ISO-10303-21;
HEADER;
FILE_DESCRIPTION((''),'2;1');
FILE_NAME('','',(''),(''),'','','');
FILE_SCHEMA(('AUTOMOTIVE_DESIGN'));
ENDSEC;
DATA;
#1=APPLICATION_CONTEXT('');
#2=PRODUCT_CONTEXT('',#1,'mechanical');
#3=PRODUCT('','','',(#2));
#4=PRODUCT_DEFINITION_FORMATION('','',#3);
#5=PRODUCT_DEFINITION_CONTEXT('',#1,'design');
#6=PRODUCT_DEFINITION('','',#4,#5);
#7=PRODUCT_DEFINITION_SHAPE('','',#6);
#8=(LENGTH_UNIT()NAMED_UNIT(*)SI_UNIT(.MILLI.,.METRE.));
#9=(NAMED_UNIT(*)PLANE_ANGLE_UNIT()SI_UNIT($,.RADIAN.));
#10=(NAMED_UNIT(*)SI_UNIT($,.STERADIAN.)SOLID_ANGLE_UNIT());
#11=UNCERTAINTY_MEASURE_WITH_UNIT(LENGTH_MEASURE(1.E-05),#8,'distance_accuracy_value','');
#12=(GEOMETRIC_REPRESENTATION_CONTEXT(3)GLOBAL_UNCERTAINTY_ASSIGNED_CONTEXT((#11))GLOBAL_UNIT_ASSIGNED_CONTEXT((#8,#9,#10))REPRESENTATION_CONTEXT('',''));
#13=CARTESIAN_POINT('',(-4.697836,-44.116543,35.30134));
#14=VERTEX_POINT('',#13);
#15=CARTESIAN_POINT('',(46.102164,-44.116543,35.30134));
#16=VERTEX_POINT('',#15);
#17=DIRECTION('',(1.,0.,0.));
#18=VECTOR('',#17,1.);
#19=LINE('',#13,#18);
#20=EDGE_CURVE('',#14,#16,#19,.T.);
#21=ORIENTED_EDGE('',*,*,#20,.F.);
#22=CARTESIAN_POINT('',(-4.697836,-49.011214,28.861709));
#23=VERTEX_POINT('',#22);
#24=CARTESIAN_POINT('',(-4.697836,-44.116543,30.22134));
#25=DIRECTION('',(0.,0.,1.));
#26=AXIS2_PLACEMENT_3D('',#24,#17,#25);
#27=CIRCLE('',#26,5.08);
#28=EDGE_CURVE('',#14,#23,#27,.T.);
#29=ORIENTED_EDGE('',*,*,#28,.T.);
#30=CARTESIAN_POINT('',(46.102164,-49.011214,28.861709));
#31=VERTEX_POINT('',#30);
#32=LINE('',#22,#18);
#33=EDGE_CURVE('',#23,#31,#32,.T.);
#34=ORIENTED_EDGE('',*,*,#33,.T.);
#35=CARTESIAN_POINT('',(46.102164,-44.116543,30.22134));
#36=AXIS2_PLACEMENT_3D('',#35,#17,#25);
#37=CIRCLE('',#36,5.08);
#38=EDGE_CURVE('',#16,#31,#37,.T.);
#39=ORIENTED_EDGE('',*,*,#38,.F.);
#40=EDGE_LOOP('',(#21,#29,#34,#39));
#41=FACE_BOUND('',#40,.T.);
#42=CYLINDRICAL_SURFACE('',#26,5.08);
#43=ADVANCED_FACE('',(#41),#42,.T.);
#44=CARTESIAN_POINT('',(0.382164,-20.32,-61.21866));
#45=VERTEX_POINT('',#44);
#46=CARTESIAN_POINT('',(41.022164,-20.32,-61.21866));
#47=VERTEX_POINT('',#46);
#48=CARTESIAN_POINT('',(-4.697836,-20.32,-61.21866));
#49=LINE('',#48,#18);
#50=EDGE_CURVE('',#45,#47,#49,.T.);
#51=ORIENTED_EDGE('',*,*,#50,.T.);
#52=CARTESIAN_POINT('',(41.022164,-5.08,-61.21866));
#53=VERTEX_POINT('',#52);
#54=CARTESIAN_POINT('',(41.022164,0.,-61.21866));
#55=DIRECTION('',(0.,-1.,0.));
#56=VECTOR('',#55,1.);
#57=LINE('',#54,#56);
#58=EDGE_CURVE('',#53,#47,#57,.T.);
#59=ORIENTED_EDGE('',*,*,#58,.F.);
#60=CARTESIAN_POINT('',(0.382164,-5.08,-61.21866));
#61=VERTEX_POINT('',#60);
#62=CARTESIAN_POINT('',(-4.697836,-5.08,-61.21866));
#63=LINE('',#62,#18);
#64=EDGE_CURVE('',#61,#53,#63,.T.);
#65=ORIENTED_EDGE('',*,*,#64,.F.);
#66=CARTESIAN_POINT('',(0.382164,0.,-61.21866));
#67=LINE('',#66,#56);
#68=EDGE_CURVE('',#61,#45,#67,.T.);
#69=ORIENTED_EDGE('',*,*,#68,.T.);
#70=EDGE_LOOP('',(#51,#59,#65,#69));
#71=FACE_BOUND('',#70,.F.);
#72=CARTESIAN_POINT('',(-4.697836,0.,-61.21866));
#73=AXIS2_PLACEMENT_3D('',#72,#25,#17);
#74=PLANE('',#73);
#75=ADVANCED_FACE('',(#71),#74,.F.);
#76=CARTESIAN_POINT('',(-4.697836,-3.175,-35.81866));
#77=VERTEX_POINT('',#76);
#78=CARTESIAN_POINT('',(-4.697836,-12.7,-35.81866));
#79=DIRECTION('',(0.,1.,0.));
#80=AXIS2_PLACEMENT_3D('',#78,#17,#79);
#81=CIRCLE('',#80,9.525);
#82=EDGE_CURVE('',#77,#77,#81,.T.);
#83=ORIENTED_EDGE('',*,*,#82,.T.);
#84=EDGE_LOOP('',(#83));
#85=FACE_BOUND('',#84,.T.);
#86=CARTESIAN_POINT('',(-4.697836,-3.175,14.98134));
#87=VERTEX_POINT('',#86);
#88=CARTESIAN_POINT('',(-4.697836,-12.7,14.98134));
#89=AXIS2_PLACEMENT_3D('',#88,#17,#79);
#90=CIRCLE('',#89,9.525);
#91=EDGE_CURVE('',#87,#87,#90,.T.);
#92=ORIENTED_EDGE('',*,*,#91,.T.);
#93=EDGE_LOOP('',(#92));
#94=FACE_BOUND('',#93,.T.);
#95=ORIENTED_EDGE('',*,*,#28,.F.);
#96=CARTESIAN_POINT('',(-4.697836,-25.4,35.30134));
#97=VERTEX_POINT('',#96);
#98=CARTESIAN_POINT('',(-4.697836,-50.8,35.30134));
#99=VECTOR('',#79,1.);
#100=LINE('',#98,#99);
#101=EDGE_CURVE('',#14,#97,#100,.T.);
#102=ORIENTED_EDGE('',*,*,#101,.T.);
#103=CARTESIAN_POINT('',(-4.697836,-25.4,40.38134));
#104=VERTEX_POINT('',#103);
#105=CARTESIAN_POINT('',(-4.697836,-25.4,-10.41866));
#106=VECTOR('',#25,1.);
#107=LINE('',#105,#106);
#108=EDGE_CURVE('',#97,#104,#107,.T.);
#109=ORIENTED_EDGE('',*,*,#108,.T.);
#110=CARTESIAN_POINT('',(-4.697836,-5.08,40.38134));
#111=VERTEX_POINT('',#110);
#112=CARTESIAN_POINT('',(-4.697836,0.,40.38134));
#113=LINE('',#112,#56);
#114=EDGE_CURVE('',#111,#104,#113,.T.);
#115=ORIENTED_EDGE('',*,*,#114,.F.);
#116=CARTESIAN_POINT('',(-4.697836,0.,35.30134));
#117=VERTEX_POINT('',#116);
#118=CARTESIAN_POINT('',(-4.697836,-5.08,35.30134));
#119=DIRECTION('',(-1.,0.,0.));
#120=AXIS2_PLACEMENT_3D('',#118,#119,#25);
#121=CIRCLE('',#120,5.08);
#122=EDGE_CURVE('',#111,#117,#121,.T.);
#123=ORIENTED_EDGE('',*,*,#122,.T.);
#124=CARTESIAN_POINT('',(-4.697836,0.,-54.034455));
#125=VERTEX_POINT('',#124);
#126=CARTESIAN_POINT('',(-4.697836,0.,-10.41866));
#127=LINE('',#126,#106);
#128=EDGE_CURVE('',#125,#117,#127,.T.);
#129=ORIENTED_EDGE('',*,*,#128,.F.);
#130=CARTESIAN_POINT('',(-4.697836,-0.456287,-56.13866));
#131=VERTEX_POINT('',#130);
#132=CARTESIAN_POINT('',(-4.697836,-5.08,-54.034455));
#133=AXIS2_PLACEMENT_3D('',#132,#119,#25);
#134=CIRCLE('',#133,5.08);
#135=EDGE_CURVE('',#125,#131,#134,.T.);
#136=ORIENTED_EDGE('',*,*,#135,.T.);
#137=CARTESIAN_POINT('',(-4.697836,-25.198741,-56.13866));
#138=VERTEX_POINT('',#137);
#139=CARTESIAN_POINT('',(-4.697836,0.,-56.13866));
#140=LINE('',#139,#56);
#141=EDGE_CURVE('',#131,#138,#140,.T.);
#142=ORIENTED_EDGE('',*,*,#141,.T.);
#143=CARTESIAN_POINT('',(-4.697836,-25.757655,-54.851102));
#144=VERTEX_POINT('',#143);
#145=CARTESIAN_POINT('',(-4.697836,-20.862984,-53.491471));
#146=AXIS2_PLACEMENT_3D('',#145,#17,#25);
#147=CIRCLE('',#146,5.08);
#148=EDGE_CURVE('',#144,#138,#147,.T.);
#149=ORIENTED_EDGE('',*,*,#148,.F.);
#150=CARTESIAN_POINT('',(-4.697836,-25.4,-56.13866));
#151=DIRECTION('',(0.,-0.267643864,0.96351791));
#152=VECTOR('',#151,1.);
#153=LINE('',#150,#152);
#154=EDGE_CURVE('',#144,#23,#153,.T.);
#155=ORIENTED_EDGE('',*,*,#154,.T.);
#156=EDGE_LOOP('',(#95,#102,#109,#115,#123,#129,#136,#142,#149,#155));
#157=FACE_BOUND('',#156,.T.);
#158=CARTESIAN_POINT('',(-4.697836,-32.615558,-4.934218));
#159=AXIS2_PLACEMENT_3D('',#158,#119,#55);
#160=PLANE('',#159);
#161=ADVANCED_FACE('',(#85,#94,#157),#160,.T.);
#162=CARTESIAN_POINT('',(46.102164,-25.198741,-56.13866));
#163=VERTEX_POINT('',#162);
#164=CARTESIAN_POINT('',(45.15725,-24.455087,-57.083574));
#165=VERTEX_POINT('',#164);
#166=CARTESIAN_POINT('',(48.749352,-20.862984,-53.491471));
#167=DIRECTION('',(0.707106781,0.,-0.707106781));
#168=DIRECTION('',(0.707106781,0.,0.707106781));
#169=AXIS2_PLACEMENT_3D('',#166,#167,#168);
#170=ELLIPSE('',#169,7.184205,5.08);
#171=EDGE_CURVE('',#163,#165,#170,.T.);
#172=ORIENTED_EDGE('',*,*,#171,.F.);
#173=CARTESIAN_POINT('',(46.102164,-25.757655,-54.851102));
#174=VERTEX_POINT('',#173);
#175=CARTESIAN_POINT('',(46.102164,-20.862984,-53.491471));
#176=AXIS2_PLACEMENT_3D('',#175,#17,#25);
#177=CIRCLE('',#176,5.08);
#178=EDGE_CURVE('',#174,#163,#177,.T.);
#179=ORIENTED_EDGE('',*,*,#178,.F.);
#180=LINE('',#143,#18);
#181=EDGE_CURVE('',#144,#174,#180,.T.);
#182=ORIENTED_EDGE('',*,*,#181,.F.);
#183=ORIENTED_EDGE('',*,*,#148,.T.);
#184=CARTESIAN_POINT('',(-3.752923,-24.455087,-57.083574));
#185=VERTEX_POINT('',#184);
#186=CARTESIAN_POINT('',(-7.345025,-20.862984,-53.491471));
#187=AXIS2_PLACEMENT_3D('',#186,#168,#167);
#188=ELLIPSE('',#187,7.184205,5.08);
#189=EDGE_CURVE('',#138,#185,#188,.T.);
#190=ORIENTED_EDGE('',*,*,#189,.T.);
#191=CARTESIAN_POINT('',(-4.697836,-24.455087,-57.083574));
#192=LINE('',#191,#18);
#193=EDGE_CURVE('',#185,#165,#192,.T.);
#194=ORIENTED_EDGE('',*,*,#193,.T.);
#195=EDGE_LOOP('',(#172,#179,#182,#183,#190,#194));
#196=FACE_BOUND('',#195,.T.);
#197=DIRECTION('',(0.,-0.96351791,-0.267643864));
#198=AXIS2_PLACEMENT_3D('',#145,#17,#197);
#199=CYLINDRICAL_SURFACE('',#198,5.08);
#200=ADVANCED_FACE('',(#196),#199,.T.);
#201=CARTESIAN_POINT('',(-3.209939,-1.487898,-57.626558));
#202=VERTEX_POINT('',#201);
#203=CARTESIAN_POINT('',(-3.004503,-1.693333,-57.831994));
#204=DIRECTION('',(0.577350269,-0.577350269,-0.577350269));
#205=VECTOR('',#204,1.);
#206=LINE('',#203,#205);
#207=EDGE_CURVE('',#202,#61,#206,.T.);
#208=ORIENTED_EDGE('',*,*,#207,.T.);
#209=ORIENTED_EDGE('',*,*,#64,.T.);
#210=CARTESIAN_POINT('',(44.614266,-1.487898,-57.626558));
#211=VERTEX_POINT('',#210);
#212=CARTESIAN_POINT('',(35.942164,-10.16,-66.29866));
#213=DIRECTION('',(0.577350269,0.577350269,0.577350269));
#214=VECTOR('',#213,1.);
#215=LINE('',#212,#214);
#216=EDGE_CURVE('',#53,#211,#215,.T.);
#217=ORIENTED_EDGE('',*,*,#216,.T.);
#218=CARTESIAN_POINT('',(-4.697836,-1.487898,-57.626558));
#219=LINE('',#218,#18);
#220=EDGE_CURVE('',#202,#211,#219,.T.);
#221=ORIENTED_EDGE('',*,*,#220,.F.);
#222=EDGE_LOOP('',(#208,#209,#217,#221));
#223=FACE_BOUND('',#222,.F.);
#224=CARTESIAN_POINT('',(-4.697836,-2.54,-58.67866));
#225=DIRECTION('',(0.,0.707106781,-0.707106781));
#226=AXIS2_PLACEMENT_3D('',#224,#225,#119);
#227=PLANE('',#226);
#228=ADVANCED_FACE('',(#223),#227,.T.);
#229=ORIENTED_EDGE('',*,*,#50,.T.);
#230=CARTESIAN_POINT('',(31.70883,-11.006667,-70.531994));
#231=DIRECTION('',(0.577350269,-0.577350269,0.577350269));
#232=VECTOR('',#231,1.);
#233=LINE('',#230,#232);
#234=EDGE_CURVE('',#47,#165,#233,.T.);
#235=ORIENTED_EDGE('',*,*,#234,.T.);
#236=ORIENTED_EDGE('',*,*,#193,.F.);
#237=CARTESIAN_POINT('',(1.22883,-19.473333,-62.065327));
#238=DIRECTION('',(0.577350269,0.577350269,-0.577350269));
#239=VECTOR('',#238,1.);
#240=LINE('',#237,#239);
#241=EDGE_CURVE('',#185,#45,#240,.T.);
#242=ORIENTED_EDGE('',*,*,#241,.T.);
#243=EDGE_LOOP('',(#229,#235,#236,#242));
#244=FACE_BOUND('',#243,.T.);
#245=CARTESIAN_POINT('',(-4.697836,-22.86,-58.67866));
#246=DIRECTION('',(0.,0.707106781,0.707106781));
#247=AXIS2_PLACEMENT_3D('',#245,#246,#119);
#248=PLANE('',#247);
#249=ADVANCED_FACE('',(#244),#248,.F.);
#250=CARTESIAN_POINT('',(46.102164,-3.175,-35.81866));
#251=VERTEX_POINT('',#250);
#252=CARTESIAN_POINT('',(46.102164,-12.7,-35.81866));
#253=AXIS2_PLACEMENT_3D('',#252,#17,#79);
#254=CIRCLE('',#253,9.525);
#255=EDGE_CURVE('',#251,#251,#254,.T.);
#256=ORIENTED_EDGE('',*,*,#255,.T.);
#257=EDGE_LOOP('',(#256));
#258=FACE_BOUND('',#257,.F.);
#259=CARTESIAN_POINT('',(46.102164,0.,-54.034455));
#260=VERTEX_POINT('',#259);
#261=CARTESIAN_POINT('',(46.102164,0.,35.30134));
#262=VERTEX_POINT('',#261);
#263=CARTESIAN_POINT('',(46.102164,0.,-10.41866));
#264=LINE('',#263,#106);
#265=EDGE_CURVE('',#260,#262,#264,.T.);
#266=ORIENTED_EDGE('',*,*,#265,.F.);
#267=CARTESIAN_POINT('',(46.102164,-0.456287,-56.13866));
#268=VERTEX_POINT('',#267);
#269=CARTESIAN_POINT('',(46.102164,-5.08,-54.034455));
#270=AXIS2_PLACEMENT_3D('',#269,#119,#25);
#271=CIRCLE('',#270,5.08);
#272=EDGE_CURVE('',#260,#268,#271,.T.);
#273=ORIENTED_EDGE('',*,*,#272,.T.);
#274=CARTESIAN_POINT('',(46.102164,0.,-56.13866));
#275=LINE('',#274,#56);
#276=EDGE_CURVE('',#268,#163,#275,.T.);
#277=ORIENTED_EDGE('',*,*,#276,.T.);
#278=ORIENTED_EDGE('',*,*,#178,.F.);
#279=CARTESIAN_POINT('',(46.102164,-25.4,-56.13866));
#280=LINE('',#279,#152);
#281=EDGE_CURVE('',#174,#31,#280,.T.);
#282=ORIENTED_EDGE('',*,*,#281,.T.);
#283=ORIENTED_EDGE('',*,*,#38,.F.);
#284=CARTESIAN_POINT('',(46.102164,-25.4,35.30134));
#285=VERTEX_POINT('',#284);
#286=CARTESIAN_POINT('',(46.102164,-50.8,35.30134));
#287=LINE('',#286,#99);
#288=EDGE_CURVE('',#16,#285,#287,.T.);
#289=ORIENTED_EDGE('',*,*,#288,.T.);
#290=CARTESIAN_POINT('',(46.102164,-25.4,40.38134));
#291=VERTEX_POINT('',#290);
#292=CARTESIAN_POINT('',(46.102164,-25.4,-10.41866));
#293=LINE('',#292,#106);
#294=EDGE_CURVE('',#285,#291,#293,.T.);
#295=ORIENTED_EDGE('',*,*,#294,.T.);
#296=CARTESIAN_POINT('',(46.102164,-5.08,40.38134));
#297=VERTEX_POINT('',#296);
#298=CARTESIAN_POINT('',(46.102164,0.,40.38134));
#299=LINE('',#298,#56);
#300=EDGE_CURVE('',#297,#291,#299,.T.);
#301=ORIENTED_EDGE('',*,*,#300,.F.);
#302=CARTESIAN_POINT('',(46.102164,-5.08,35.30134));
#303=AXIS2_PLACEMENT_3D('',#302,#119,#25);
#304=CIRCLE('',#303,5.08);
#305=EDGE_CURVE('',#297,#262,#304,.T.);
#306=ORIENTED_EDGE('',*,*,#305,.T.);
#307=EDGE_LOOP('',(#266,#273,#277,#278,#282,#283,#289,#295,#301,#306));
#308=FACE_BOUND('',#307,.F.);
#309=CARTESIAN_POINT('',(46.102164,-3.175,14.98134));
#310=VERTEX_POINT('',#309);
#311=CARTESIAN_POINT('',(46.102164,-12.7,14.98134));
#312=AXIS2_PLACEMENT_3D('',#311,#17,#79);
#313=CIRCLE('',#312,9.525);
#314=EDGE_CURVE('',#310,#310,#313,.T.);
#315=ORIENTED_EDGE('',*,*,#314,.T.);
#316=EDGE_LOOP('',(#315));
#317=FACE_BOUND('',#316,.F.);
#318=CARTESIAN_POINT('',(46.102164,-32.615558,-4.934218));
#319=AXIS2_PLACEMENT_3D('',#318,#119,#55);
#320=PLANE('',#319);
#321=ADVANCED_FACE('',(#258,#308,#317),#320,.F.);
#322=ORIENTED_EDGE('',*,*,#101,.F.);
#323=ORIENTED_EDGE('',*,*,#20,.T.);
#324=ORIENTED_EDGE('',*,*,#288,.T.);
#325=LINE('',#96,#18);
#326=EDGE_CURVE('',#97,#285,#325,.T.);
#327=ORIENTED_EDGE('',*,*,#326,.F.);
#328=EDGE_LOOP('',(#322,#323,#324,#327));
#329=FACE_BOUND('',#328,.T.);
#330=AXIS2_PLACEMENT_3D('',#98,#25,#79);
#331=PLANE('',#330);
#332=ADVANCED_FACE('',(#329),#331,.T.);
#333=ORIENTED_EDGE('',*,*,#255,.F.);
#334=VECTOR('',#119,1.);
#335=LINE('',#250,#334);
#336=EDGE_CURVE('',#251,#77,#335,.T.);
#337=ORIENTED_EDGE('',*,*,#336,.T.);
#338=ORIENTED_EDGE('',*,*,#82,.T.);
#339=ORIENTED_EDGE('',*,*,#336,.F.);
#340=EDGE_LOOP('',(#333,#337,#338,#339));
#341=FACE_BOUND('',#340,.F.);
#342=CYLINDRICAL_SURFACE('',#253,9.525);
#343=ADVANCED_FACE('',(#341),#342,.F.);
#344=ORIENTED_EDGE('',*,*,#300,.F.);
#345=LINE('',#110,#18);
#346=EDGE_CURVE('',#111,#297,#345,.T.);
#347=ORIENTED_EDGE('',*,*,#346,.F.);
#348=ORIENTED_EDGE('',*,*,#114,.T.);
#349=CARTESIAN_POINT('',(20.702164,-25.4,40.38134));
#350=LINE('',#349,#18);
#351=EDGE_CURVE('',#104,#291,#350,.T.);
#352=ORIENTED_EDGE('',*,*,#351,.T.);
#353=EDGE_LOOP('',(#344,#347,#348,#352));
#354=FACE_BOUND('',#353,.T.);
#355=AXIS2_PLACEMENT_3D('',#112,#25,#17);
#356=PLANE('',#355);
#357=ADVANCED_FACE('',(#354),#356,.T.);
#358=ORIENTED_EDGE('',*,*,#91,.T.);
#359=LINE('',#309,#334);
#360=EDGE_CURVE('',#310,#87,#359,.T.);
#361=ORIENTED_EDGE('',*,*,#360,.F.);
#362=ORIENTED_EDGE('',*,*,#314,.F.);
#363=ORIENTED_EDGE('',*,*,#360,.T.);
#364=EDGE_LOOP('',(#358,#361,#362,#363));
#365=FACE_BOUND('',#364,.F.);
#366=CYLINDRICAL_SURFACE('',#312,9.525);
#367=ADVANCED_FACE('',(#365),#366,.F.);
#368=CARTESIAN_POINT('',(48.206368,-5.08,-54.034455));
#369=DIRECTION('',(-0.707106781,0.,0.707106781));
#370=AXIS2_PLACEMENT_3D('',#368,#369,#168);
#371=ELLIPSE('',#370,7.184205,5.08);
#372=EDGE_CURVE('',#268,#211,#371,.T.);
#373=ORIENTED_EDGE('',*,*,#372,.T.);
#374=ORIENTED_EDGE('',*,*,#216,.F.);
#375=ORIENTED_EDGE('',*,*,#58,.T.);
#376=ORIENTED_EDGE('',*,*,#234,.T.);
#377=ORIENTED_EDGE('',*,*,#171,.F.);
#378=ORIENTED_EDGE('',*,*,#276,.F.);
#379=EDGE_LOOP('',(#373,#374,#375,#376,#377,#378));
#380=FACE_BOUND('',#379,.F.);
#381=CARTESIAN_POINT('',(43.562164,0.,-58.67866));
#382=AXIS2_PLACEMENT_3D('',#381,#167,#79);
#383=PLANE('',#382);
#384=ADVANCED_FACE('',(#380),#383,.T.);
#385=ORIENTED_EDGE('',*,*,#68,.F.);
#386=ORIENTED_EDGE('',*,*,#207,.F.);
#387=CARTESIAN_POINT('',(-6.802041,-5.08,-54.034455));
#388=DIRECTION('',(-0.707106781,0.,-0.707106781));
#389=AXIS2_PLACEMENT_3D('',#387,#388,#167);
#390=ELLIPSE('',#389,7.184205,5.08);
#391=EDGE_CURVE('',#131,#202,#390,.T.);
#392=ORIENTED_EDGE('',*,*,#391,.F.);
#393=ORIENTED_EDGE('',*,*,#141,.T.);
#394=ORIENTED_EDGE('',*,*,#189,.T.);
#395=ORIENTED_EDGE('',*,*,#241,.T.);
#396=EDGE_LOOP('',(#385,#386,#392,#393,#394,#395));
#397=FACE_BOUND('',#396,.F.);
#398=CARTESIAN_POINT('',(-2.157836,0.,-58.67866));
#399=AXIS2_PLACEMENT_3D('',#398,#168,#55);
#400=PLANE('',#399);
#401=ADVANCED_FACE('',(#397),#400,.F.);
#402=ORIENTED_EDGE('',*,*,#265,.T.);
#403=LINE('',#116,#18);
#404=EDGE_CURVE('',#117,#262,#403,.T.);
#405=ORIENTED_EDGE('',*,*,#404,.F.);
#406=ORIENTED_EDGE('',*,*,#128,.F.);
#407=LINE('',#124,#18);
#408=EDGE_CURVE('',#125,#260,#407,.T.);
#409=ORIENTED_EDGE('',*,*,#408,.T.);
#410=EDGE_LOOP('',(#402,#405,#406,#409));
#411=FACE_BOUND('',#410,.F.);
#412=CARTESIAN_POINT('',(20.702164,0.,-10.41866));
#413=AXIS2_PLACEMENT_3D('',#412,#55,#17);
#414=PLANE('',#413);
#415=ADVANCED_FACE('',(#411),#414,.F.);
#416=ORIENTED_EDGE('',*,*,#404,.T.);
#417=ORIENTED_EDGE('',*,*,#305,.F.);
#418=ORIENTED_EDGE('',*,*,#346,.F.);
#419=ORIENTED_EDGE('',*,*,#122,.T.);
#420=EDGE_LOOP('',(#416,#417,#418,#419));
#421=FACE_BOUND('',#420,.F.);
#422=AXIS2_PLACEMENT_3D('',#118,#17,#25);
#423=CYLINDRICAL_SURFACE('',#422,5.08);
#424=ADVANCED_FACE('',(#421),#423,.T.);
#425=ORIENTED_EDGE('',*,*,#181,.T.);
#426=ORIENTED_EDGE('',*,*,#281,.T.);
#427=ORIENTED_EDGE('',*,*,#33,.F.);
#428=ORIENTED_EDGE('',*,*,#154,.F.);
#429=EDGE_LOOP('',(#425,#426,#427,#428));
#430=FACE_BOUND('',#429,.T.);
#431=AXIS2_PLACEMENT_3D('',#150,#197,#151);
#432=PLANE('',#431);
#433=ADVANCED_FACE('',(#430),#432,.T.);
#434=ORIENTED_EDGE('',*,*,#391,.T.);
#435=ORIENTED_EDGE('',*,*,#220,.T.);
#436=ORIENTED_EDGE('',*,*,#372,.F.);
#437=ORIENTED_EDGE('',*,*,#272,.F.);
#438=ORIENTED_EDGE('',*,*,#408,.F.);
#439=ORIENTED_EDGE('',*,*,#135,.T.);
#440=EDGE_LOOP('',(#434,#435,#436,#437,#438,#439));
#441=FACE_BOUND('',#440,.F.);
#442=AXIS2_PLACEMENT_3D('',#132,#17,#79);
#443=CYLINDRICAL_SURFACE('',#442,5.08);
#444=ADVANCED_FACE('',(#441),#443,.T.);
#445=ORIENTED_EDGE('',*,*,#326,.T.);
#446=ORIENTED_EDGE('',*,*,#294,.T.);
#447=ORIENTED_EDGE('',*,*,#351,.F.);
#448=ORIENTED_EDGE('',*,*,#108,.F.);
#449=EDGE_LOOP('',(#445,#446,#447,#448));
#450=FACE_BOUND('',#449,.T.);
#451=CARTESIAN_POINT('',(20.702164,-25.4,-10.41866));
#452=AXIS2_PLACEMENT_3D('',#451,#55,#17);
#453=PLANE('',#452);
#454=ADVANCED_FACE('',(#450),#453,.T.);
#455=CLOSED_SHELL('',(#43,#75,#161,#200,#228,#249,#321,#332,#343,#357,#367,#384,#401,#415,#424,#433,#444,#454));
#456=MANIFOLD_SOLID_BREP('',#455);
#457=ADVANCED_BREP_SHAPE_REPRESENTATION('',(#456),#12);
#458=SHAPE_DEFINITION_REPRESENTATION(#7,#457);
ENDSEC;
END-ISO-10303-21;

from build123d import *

# Parameters (mm, degrees)
F0_W     = 50.8
F0_H     = 101.6
F1_DEPTH = 25.4
F2_R     = 9.525
F3_DEPTH = 50.8
F4_SIZE  = 5.08
F7_DEPTH = 50.8
F8_R     = 5.08


# Not quite as in the source:
# - a feature of the source that left no trace in its solid (it failed there, or was rolled back) is left out


with BuildPart() as f1:
    # F0 (on Front) → F1 (new body)
    with BuildSketch(Plane.XZ):
        with Locations((20.7021635301, -10.4186603248)):
            Rectangle(F0_W, F0_H)
    extrude(amount=F1_DEPTH)

    # F2 (on face) → F3 (cut)
    with BuildSketch(Plane.YZ.offset(46.1021635301)):
        with Locations((-12.7, 14.9813396752)):
            Circle(F2_R)
        with Locations((-12.7, -35.8186603248)):
            Circle(F2_R)
    extrude(amount=-F3_DEPTH, mode=Mode.SUBTRACT)

    # F4
    f4_edges = [f1.edges().sort_by_distance(p)[0] for p in [
        (-4.697836, -12.7, -61.21866),
        (46.102164, -12.7, -61.21866),
        (20.702164, 0, -61.21866),
        (20.702164, -25.4, -61.21866),
    ]]
    chamfer(f4_edges, length=F4_SIZE)

    # F6 (on face) → F7 (join)
    with BuildSketch(Plane(origin=(-4.6978364699, 0, 0), x_dir=(0, -1, 0), z_dir=(-1, 0, 0))):
        Polygon((50.8, 35.3013396752), (25.4, 35.3013396752), (25.4, -56.1386603248), align=None)
    extrude(amount=-F7_DEPTH)

    # F8
    f8_edges = [f1.edges().sort_by_distance(p)[0] for p in [
        (20.702164, -50.8, 35.30134),
        (20.702164, 0, 40.38134),
        (20.702164, -25.4, -56.13866),
        (20.702164, 0, -56.13866),
    ]]
    fillet(f8_edges, radius=F8_R)


solid = f1.part
